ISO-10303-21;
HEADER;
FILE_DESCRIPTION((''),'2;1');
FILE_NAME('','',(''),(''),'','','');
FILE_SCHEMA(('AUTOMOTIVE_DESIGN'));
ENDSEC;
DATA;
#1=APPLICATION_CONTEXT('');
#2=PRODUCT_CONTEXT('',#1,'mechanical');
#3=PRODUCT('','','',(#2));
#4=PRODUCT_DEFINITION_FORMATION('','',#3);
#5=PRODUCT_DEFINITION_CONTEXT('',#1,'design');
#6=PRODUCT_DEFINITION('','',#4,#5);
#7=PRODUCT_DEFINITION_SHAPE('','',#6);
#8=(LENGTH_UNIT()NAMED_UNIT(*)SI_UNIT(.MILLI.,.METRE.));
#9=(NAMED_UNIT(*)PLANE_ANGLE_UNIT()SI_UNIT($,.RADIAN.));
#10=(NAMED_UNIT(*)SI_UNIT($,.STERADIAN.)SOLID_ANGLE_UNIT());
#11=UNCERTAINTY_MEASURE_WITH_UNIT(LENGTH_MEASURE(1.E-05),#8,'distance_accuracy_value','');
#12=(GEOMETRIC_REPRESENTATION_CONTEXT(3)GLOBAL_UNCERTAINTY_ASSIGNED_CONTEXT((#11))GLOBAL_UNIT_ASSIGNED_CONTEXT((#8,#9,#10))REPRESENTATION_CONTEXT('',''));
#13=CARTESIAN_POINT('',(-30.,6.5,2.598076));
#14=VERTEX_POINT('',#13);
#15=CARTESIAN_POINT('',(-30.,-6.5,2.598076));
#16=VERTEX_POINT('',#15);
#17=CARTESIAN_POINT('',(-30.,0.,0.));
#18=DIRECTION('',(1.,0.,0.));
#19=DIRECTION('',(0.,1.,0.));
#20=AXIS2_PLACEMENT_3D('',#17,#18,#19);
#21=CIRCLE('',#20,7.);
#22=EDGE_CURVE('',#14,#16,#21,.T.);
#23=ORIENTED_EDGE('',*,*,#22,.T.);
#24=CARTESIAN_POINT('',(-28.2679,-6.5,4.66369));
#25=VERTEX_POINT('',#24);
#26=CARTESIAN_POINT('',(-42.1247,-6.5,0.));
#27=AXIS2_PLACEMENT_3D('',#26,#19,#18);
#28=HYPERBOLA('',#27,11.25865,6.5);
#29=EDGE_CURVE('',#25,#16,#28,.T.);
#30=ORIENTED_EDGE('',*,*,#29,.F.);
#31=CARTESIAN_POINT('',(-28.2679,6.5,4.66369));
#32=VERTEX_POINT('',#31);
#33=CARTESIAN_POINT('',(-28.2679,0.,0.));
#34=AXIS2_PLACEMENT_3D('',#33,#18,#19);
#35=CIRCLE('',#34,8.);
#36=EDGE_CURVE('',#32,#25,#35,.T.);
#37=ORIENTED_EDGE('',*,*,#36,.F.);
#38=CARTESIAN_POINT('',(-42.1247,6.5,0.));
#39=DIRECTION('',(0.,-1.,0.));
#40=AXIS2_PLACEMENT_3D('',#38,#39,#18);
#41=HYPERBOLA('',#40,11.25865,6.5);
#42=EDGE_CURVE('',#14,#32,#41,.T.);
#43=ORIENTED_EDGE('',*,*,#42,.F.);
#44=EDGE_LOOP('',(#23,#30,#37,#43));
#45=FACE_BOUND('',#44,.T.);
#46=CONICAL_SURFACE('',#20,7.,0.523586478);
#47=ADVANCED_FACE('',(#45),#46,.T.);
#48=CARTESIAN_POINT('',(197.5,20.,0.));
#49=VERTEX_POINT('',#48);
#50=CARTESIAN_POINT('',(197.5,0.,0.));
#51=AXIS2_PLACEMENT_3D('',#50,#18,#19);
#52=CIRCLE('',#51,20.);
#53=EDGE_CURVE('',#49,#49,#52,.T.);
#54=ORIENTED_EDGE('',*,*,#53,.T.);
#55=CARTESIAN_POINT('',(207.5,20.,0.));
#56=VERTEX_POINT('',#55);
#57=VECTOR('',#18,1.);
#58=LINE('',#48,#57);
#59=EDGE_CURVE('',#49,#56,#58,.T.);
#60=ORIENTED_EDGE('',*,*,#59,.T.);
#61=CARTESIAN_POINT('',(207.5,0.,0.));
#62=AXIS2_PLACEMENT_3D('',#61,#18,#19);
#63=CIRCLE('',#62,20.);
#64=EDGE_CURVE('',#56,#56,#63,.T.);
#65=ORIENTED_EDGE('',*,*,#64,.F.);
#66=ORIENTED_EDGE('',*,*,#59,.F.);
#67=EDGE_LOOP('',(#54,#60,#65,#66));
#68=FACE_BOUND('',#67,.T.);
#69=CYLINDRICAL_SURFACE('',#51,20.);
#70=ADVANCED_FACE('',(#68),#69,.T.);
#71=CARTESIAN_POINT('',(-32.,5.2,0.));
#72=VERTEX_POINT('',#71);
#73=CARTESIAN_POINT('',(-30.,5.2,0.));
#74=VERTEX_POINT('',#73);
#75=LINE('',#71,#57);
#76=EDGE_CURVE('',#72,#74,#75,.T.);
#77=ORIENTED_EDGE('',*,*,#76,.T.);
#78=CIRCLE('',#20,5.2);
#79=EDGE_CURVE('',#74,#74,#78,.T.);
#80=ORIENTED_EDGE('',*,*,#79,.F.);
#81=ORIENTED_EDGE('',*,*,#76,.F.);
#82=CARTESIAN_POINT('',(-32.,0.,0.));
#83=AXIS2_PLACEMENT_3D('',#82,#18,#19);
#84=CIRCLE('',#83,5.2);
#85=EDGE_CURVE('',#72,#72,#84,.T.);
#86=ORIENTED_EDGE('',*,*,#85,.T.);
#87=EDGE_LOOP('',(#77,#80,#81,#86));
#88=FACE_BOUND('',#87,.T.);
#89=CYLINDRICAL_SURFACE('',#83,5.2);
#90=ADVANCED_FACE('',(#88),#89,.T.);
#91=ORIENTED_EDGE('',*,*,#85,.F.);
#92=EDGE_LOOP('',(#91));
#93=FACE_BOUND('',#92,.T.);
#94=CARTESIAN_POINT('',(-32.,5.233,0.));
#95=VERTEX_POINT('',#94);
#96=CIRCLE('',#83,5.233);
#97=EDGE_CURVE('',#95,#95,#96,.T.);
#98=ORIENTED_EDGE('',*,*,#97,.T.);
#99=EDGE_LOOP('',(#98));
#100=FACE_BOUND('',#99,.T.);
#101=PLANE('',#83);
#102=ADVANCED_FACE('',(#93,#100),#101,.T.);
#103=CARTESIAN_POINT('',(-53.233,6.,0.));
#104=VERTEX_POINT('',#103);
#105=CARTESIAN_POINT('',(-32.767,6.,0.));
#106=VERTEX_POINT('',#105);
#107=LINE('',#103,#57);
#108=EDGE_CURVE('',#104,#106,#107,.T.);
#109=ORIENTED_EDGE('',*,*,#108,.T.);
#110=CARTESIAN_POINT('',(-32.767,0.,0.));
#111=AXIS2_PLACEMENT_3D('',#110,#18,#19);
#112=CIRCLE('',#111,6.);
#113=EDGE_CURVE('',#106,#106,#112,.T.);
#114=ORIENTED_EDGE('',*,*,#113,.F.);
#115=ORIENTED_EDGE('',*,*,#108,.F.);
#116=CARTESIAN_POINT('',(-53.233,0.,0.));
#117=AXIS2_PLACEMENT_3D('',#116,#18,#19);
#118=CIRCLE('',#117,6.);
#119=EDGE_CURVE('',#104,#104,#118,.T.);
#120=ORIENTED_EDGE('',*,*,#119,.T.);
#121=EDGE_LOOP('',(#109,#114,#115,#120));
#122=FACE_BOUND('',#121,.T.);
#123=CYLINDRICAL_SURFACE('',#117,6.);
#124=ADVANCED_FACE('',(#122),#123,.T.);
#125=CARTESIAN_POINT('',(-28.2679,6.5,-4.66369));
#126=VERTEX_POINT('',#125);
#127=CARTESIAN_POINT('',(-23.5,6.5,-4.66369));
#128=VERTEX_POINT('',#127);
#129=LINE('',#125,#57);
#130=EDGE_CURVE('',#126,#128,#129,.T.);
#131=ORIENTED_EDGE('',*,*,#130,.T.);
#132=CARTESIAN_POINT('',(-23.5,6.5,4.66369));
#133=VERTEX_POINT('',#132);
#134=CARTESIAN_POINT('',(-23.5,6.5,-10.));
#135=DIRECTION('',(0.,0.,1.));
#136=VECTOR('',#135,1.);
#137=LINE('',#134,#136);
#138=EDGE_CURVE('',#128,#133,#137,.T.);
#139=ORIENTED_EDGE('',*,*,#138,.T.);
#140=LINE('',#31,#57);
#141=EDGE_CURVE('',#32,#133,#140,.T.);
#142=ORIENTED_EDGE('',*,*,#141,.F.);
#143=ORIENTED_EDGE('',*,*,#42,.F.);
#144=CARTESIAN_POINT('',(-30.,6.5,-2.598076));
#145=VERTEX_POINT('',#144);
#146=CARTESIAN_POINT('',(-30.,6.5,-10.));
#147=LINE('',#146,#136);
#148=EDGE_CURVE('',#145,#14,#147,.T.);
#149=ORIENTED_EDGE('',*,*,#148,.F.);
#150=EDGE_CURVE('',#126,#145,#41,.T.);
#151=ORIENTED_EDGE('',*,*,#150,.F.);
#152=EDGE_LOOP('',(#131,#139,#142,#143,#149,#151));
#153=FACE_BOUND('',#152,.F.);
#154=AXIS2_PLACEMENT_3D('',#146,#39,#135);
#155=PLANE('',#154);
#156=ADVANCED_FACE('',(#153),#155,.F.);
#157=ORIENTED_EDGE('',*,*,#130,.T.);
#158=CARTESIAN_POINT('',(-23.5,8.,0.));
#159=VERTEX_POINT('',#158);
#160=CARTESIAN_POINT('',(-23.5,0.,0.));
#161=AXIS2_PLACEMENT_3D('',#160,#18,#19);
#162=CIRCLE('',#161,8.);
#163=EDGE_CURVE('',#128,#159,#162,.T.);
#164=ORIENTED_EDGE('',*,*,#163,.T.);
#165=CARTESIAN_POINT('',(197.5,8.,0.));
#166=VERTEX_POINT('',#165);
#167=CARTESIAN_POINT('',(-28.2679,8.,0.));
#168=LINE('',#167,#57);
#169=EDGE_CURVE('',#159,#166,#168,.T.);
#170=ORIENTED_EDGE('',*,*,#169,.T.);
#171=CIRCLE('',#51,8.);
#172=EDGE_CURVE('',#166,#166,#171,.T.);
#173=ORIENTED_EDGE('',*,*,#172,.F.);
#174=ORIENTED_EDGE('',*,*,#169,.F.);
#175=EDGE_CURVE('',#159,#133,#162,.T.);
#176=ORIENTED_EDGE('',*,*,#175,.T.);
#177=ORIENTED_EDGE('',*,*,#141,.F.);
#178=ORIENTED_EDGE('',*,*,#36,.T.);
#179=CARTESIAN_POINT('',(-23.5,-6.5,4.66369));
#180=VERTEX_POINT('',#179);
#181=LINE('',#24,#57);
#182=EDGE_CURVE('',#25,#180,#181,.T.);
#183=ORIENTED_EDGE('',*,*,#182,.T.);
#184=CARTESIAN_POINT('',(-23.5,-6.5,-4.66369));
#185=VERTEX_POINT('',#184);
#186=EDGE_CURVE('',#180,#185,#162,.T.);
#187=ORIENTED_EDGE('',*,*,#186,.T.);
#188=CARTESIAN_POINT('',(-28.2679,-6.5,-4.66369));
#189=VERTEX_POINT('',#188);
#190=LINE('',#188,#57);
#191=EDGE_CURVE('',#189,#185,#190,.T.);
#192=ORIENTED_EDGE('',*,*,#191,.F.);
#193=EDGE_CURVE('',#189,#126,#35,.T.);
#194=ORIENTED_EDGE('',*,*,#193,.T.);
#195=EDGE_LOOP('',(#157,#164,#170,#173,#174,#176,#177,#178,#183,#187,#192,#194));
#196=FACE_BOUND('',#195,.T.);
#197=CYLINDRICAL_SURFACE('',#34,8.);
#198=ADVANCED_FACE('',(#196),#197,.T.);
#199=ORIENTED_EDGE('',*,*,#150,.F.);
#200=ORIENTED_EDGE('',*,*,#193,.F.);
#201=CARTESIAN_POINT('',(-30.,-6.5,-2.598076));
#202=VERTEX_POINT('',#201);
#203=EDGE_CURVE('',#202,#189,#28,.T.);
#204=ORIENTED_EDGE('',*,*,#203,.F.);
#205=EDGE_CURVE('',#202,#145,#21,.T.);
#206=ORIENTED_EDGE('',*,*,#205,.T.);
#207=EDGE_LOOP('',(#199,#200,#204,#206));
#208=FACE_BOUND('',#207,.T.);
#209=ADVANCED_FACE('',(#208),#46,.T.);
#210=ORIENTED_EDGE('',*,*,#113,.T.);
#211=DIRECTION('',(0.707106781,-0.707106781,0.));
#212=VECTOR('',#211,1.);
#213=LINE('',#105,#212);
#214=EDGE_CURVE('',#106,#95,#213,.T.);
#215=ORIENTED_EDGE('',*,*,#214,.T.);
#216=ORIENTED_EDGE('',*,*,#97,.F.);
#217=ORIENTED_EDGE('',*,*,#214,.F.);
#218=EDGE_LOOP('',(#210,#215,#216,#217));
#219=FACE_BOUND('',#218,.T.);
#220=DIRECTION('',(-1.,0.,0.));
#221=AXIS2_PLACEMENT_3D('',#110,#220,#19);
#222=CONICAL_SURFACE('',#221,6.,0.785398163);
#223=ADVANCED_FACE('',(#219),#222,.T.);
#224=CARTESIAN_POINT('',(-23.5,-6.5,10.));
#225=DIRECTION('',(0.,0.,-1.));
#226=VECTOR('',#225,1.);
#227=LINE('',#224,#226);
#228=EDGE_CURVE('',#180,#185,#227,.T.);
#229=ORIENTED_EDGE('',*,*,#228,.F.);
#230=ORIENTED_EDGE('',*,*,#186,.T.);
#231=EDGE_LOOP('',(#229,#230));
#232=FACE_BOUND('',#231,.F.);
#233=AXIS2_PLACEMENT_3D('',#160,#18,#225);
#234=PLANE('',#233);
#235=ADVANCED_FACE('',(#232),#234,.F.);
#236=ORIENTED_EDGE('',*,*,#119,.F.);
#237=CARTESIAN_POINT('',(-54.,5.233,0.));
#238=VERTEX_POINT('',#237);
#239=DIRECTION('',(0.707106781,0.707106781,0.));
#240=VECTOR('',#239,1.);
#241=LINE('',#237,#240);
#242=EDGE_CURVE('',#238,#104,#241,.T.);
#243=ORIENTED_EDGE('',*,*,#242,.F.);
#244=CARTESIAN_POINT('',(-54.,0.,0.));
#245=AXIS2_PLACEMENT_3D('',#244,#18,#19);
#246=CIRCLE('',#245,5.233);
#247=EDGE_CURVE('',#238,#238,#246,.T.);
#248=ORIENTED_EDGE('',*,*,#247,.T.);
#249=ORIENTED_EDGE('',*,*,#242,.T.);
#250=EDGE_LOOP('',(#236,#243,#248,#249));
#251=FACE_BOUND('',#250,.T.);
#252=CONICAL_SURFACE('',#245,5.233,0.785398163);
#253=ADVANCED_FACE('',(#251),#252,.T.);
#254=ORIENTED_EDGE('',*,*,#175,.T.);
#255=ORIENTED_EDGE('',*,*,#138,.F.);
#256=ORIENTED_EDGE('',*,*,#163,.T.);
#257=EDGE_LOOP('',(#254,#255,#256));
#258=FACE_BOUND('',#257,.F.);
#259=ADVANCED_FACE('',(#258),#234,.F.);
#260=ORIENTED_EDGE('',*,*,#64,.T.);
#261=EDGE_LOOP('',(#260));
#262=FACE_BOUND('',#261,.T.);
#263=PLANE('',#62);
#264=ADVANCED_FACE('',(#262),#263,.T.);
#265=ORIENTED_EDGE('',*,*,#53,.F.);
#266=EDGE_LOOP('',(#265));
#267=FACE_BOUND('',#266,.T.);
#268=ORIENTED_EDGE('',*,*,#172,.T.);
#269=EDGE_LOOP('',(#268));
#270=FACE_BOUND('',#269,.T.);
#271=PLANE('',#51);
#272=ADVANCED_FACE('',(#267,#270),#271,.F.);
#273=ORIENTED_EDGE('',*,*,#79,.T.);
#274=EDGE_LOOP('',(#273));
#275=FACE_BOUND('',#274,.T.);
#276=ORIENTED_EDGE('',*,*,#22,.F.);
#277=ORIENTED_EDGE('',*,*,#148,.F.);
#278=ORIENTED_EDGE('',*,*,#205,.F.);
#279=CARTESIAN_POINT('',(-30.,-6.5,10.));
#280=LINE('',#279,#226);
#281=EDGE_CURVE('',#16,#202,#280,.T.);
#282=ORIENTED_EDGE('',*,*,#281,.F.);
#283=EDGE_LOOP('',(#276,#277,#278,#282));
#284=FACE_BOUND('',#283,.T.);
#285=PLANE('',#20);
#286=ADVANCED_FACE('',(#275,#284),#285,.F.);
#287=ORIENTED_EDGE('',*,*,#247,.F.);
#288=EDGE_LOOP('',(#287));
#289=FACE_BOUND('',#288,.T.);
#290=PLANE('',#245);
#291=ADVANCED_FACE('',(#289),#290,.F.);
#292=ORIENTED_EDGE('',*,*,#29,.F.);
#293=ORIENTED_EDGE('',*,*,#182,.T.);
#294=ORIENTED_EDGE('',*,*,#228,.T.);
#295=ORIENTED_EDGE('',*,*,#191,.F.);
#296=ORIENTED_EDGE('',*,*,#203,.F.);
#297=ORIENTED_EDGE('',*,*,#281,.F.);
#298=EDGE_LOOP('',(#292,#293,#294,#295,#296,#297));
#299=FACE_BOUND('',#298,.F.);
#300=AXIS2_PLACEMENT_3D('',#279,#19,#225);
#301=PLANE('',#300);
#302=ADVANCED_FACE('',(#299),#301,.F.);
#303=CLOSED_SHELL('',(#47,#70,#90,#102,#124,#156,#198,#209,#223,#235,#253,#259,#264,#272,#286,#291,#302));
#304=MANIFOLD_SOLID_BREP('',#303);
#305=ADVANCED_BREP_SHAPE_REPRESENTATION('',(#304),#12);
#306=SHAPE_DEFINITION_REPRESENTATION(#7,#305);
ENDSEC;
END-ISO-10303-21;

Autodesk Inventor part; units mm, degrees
sketch "Sketch_9" plane through (0, 0, 0) normal (0, 0, 1) x (1, 0, 0)
  line L0 (207.5, 0) -> (-54, 0)
  line L1 (-54, 0) -> (-54, 5.233)
  line L2 (-54, 5.233) -> (-53.233, 6)
  line L3 (-53.233, 6) -> (-32.767, 6)
  line L4 (-32.767, 6) -> (-32, 5.233)
  line L5 (-32, 5.233) -> (-32, 5.2)
  line L6 (-32, 5.2) -> (-30, 5.2)
  line L7 (-30, 5.2) -> (-30, 7)
  line L8 (-30, 7) -> (-28.2679, 8)
  line L9 (-28.2679, 8) -> (197.5, 8)
  line L10 (197.5, 8) -> (197.5, 20)
  line L11 (197.5, 20) -> (207.5, 20)
  line L12 (207.5, 20) -> (207.5, 0)
  line L13 (207.5, 0) -> (-54, 0)
revolve "Revolution1" add sketch "Sketch_9" angle 360 about axis through (207.5, 0, 0) along (1, 0, 0)
thread "Thread1" size "M12x1.25" class "6g" standard "ISO Metric profile" full length
sketch "Sketch_4" plane through (-30, 0, 0) normal (1, 0, 0) x (0, 0, -1)
  line L0 (-15, -11.5) -> (15, -11.5)
  line L1 (15, -11.5) -> (15, 11.5)
  line L2 (15, 11.5) -> (-15, 11.5)
  line L3 (-15, 11.5) -> (-15, -11.5)
  line L4 (-10, 6.5) -> (-10, -6.5)
  line L5 (-10, -6.5) -> (10, -6.5)
  line L6 (10, -6.5) -> (10, 6.5)
  line L7 (10, 6.5) -> (-10, 6.5)
extrude "Extrusion1" cut sketch "Sketch_4" along normal blind 6.5
ref_plane "A4_XY" through (455, 0, 0) normal (0, 1, 0) x (1, 0, 0)
ref_plane "A4_YZ" through (455, 0, 0) normal (1, 0, 0) x (0, 0, -1)
ref_plane "A4_ZX" through (455, 0, 0) normal (0, 0, -1) x (0, 1, 0)
ref_plane "ROD_BODY_XY" through (0, 0, 0) normal (1, 0, 0) x (0, 0, -1)
ref_plane "ROD_BODY_YZ" through (0, 0, 0) normal (0, 0, -1) x (0, 1, 0)
ref_plane "ROD_BODY_ZX" through (0, 0, 0) normal (0, 1, 0) x (1, 0, 0)
ref_plane "ROD_NUT_XY" through (-54, 0, 0) normal (-1, 0, 0) x (0, 0, -1)
ref_plane "ROD_NUT_YZ" through (-54, 0, 0) normal (0, 0, -1) x (0, -1, 0)
ref_plane "ROD_NUT_ZX" through (-54, 0, 0) normal (0, -1, 0) x (-1, 0, 0)
properties part number "CP96S40-160_ROD" material "Stainless Steel, Polished"
